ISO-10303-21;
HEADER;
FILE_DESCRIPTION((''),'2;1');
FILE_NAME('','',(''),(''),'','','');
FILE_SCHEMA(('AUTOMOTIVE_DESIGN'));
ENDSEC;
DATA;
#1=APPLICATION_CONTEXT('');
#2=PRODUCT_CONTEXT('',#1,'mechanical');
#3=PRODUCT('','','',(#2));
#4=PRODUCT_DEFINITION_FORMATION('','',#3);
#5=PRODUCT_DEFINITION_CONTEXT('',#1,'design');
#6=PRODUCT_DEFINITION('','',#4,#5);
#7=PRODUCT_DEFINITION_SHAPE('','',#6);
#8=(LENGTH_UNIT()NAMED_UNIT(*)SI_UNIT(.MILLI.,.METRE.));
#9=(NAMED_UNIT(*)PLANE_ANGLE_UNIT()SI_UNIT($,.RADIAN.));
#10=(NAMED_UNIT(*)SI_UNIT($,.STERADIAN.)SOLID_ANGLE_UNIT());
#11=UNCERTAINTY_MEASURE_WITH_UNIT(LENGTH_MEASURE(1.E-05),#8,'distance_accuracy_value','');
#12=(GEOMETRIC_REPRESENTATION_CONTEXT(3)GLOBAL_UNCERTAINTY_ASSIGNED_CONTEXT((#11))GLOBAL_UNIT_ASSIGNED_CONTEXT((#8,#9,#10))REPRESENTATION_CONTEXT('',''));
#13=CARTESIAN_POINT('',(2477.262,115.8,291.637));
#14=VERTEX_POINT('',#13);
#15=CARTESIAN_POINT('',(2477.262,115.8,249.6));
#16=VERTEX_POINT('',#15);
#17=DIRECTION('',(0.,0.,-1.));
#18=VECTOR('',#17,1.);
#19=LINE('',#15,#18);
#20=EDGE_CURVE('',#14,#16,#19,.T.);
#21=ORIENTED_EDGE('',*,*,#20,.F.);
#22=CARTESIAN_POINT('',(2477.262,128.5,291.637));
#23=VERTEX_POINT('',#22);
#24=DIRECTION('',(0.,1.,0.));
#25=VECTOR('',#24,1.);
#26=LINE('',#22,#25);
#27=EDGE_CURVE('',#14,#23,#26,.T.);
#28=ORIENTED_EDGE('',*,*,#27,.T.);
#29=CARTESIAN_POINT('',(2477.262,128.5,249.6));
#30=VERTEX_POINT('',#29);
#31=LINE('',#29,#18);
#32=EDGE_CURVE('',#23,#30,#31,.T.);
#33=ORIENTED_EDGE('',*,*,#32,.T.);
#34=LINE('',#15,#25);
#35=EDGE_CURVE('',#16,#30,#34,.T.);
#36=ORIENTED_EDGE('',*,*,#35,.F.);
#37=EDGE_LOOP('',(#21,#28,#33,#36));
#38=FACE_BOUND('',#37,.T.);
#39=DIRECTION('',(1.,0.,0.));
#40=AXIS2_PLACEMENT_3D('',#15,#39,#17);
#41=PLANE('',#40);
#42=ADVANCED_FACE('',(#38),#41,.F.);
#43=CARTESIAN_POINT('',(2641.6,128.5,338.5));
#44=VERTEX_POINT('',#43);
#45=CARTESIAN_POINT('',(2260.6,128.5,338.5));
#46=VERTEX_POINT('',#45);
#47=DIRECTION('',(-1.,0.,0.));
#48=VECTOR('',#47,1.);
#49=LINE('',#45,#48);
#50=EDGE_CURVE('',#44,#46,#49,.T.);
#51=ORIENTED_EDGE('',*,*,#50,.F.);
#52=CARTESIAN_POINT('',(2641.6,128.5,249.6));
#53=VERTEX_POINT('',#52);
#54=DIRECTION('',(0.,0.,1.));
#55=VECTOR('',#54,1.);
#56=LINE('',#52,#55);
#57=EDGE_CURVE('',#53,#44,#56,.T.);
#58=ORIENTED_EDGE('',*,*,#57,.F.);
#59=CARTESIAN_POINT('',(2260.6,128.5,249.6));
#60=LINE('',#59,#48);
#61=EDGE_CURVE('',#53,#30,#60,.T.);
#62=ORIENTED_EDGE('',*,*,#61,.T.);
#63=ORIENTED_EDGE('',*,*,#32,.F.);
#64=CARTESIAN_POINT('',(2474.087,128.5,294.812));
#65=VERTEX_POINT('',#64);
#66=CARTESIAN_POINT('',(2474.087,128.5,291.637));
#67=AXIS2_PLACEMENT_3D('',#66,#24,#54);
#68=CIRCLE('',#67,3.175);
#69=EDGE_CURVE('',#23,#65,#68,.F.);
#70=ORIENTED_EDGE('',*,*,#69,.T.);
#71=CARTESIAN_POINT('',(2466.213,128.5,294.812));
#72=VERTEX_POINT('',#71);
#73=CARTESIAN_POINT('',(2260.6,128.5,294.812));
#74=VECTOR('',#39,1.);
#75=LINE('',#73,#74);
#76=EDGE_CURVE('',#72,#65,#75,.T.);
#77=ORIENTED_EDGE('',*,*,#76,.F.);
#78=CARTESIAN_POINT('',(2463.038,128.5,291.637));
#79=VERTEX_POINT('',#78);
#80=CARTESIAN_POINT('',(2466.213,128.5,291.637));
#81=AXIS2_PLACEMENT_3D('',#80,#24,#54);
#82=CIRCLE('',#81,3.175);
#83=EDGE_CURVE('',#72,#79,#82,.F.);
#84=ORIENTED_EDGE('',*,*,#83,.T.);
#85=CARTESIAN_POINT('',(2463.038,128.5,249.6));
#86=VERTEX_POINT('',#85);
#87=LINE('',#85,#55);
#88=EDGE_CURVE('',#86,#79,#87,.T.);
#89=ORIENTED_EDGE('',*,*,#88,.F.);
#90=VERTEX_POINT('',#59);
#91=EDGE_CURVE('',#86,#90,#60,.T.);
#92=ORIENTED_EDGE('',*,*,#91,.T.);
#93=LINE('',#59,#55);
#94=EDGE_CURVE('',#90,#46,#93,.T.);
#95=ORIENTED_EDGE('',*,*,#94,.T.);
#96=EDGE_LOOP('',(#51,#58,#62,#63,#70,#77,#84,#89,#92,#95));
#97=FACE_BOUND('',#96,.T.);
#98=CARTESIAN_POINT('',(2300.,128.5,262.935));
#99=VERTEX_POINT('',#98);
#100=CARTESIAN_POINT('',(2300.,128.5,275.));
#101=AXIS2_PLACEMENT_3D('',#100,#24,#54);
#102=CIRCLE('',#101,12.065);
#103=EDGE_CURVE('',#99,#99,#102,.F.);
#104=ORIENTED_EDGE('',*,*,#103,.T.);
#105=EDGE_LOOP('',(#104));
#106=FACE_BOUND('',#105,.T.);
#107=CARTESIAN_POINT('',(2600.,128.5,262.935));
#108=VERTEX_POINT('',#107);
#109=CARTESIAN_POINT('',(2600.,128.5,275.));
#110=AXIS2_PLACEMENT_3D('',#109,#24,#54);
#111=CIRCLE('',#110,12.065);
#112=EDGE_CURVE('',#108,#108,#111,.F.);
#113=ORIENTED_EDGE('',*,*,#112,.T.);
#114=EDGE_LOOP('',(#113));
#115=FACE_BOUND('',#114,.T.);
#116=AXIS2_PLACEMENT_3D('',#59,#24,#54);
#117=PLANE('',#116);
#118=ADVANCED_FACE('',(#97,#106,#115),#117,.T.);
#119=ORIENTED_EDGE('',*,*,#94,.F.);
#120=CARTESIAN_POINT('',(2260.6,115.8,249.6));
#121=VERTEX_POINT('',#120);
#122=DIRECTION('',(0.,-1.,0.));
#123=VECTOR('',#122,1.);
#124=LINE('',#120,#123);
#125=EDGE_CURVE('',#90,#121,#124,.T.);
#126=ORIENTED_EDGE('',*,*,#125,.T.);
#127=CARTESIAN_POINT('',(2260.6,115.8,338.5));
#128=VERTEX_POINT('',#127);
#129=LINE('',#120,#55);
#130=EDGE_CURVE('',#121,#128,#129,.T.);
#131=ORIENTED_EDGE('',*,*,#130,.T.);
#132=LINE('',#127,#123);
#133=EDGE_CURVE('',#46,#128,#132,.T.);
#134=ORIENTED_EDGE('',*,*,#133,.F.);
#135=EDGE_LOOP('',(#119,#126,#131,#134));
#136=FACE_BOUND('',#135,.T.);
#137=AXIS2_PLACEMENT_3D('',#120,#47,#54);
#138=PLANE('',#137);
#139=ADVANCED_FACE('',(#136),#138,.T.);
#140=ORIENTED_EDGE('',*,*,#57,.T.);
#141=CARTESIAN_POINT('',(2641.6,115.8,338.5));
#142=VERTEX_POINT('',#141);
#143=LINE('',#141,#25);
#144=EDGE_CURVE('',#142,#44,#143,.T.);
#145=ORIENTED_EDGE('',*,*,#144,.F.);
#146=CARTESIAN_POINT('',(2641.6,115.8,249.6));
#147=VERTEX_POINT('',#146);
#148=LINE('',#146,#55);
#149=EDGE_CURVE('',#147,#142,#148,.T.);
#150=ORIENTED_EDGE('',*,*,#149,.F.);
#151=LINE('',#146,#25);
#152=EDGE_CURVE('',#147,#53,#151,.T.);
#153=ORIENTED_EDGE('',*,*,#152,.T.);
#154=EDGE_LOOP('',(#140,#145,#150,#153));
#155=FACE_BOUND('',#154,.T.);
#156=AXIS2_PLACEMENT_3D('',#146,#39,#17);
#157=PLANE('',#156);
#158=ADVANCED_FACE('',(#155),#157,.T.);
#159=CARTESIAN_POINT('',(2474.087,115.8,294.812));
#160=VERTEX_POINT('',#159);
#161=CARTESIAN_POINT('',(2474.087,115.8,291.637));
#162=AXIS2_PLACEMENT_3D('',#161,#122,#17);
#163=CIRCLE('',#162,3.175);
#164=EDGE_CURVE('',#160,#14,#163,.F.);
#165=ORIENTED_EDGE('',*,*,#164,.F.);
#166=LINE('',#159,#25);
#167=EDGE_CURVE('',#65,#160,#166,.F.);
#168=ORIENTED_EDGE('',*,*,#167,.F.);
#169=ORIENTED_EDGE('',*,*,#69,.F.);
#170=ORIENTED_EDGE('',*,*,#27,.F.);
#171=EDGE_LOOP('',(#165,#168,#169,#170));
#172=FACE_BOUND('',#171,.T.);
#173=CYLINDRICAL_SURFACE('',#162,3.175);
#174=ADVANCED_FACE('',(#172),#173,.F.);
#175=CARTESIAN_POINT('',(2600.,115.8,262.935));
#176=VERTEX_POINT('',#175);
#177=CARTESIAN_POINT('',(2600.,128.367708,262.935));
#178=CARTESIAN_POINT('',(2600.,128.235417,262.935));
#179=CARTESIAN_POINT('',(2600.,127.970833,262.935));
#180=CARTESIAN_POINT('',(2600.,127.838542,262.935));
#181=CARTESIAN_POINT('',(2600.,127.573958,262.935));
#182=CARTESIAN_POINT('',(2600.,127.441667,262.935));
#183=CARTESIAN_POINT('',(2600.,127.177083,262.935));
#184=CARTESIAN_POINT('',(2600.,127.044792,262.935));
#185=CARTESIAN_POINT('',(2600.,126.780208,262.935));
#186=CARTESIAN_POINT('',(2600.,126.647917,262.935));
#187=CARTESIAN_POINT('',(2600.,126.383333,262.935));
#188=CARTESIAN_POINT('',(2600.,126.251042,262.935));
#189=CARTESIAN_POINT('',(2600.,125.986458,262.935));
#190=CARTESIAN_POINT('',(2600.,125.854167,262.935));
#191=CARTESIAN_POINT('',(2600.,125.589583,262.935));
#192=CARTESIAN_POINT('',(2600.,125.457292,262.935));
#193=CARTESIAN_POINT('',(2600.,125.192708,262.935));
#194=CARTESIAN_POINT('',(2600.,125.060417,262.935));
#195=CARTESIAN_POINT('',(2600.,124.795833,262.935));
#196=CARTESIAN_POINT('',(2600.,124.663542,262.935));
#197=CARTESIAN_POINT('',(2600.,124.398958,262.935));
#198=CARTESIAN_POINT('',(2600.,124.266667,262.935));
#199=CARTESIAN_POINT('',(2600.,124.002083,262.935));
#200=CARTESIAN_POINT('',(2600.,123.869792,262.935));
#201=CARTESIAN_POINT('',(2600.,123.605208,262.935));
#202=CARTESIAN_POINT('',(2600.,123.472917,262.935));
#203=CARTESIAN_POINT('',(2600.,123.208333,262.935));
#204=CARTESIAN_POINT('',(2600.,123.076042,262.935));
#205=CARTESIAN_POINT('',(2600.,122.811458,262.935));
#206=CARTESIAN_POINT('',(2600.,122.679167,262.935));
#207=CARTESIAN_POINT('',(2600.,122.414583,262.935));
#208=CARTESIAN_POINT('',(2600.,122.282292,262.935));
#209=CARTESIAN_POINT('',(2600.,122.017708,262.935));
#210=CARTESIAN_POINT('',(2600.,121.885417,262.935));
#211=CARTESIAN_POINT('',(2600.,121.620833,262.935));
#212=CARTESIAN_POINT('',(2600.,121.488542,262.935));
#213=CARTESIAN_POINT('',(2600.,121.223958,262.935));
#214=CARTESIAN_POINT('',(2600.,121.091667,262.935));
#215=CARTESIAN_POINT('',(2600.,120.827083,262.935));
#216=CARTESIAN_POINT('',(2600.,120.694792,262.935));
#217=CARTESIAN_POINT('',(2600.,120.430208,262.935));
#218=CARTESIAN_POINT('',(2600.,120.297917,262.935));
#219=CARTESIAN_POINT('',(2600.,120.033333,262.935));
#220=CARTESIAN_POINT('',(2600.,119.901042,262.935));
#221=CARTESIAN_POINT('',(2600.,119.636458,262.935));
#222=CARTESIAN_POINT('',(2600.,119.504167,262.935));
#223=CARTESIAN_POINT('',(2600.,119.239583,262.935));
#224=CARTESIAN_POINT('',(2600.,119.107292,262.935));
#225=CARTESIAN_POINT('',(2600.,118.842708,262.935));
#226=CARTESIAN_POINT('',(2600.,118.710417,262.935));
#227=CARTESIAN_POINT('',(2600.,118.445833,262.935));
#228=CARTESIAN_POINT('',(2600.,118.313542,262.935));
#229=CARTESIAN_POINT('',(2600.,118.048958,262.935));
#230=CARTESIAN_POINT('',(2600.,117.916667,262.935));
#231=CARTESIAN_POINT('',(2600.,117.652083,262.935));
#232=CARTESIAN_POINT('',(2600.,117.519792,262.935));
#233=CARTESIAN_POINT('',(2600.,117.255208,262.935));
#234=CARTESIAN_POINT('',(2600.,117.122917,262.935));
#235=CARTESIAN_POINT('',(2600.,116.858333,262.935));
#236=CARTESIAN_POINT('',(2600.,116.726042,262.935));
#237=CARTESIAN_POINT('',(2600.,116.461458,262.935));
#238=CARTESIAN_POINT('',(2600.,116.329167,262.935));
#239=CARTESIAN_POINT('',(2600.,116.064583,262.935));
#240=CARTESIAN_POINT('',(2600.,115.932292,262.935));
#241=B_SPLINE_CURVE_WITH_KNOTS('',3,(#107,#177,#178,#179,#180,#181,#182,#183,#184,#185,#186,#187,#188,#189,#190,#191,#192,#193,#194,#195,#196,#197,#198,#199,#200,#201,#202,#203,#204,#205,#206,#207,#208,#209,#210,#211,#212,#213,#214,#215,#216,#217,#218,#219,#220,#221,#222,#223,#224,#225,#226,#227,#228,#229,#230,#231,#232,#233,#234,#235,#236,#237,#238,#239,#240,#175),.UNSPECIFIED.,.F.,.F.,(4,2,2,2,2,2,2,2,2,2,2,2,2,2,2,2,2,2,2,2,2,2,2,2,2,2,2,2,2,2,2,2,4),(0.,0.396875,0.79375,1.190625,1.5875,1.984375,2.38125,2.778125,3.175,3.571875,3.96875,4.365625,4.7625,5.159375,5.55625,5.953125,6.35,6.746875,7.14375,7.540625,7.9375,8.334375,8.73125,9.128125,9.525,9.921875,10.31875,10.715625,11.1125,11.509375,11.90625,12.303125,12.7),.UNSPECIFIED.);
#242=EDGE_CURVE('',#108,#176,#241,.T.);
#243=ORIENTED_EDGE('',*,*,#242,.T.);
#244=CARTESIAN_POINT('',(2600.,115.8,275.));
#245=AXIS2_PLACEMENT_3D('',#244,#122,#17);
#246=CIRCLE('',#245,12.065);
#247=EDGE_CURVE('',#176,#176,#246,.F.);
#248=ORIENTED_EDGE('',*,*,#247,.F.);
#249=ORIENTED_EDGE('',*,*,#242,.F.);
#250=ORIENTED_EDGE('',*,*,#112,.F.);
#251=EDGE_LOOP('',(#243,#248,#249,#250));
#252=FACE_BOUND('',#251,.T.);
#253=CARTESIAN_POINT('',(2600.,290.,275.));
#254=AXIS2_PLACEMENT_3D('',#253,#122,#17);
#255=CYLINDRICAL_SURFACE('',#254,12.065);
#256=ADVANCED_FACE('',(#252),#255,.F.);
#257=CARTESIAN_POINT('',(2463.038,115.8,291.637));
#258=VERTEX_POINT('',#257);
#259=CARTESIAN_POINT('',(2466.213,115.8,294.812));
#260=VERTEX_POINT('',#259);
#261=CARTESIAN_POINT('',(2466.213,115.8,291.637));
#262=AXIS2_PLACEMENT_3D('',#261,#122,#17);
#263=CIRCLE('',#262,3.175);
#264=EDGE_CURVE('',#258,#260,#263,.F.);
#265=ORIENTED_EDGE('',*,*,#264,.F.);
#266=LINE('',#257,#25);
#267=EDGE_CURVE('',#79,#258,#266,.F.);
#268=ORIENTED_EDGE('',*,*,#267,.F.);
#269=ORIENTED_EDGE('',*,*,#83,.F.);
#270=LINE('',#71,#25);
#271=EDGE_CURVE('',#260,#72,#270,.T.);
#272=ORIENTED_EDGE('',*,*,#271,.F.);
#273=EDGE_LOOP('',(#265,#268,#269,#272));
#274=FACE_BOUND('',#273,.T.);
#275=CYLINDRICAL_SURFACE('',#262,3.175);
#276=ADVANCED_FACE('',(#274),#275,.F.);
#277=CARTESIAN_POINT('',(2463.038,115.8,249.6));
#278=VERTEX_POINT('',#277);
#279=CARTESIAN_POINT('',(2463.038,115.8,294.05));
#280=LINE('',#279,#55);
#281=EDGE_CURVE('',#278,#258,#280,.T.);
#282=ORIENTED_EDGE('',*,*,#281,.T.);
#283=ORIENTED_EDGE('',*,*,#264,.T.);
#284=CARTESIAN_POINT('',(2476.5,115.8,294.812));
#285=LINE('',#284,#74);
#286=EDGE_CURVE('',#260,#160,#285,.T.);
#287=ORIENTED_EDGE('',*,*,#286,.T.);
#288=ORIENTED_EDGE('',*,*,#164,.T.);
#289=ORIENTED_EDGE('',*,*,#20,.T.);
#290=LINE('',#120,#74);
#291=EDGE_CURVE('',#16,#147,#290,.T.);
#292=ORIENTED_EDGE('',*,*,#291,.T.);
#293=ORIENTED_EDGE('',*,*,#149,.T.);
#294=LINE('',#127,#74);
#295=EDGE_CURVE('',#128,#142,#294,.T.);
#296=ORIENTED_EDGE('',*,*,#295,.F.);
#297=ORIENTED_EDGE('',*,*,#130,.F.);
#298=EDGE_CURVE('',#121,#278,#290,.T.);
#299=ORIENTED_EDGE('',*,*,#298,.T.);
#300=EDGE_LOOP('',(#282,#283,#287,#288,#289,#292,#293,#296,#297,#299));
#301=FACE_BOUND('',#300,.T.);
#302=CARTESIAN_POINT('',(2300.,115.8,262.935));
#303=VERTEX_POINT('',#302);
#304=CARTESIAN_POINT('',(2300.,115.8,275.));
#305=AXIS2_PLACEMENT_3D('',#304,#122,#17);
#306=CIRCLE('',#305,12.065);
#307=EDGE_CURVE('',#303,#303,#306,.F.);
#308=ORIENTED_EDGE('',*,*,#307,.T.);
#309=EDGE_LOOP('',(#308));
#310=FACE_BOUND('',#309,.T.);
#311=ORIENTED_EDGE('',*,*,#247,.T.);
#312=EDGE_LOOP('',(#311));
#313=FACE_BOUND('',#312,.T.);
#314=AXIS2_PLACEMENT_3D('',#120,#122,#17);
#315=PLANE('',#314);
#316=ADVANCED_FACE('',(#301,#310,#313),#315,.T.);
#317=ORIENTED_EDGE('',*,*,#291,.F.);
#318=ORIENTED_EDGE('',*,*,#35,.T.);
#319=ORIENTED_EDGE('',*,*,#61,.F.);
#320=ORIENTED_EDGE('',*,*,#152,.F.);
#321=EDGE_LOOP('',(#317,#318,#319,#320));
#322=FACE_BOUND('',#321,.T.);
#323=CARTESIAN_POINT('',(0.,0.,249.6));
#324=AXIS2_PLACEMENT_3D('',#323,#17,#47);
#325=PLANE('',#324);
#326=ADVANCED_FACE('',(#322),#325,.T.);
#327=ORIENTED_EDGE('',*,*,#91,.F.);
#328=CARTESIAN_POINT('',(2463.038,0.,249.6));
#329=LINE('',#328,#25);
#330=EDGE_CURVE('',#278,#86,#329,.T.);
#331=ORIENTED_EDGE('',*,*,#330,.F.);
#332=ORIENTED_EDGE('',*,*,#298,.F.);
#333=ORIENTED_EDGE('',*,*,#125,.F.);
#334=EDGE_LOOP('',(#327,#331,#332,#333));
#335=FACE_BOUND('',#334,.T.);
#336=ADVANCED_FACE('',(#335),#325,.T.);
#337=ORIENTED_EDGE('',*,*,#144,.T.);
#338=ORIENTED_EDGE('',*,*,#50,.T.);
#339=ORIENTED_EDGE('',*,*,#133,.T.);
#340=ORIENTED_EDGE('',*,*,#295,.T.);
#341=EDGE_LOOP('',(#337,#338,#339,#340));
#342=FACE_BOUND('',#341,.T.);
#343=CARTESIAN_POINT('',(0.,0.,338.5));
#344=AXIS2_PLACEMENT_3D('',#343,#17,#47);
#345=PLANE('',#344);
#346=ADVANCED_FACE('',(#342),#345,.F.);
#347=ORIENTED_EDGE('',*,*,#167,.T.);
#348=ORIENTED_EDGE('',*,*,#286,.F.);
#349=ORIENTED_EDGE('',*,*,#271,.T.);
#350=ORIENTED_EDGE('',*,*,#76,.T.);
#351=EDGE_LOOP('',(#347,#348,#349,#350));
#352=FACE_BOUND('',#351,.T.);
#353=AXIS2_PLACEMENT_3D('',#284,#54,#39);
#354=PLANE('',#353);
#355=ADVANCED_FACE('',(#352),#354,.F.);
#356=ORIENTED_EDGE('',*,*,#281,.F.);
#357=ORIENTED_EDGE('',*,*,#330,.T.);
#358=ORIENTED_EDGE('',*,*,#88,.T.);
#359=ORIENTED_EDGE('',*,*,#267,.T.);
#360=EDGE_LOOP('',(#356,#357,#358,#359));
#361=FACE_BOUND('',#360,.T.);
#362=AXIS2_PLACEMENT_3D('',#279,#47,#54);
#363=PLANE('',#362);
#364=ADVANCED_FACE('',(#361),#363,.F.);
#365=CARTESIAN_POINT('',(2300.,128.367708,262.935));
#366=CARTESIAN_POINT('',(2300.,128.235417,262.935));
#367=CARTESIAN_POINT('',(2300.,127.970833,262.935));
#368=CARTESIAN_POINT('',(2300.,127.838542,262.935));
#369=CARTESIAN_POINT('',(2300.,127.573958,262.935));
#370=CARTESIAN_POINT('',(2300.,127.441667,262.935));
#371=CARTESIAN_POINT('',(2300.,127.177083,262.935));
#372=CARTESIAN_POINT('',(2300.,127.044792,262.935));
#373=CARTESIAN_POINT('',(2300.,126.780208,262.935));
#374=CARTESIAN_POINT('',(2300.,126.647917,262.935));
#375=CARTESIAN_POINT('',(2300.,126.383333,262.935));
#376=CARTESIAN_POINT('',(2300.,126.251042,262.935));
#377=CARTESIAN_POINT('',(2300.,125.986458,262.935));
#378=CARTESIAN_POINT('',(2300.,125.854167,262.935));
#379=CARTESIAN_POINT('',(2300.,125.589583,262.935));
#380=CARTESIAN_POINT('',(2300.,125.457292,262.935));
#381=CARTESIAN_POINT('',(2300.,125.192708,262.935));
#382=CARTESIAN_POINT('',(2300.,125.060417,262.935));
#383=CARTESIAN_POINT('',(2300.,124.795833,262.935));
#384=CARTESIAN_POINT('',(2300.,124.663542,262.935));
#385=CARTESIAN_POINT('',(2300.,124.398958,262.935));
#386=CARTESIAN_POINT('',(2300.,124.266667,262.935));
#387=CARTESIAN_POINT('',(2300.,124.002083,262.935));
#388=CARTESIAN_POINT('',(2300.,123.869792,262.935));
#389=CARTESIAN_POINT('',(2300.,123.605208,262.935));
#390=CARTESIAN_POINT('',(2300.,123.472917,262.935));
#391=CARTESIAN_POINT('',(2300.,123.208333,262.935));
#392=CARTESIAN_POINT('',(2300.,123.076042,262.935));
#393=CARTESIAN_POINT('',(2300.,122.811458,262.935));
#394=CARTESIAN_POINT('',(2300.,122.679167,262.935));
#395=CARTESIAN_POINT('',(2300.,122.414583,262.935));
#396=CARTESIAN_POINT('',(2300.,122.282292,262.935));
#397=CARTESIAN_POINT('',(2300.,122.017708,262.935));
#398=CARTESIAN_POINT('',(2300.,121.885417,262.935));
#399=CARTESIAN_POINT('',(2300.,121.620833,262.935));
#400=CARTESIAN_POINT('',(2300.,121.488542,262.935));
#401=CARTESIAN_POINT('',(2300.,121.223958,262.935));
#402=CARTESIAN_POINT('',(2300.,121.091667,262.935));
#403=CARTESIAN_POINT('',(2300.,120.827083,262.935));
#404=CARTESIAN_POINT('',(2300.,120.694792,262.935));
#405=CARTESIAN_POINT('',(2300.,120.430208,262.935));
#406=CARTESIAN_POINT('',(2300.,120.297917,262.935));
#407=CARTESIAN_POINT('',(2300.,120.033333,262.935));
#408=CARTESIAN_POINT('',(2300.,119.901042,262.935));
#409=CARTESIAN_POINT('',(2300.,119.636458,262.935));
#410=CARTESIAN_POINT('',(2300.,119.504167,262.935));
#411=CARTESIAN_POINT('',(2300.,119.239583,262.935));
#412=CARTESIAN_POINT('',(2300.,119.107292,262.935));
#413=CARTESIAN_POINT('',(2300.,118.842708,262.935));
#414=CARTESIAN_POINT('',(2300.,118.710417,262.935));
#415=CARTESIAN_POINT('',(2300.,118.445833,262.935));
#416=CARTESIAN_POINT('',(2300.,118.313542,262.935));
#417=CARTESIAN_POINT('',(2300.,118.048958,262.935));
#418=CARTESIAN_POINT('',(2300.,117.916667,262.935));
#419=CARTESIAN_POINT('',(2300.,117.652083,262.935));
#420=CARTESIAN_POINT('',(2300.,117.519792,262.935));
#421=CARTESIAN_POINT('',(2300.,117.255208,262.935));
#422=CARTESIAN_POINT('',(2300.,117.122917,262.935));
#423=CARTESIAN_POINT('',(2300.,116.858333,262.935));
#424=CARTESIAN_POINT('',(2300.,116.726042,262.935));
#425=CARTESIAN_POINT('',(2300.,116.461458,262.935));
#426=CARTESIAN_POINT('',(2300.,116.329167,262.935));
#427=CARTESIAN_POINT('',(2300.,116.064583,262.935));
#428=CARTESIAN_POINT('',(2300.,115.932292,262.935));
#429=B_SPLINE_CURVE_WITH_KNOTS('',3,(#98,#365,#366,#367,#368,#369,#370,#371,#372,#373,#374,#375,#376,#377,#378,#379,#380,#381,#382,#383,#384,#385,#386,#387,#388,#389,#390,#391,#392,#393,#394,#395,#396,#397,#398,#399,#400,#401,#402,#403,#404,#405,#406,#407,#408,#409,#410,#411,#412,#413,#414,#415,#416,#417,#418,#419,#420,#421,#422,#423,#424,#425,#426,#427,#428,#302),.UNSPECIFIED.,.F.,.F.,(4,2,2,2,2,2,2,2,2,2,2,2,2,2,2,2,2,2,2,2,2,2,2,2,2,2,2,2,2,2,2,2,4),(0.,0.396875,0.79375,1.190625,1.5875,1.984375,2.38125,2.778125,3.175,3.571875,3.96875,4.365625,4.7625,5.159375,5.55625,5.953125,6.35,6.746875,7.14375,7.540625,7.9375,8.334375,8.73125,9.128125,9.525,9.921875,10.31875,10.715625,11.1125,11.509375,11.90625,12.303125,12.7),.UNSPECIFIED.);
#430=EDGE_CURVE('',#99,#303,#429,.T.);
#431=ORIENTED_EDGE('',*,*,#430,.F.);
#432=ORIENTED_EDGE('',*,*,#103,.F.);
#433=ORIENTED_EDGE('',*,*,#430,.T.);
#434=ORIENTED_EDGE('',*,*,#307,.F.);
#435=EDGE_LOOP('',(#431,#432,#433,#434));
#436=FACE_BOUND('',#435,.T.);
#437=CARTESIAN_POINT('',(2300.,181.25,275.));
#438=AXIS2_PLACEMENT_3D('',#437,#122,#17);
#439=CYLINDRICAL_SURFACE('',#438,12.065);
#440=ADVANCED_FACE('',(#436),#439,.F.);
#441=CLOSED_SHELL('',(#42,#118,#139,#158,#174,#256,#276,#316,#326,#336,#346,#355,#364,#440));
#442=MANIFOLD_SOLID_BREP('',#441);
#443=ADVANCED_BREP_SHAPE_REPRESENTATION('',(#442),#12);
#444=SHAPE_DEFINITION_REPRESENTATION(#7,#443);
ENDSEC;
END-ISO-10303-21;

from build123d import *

# Parameters (mm, degrees)
BOSS_EXTRUDE1_DEPTH      = 50.8
BOSS_EXTRUDE1_DEPTH_BACK = 38.1
SKETCH2_W                = 381
SKETCH2_H                = 12.7
SKETCH3_W                = 12.7
SKETCH3_H                = 44.45
CUT_EXTRUDE1_DEPTH       = 2664.230012597
CAVITY1_START            = 115.8
CAVITY1_OUTLINE_R        = 12.7
CAVITY1_DEPTH            = 12.7
MOVE_FACE_HOLES_BY       = 0.635
MOVE_FACE_HOLES_2_BY     = 0.635
MOVE_FACE2_BY            = 0.762
MOVE_FACE2_2_BY          = 0.762
MOVE_FACE2_3_BY          = 0.762
SLOT_FILLET_R            = 3.175


# Read off the part's stored shape, not the designer's step: Cavity1
with BuildPart() as part:
    # Sketch2 → Boss-Extrude1 (new, two sides: drawn at the far end of the back side and taken through both)
    with BuildSketch(Plane.XY.offset(287.7).offset(-BOSS_EXTRUDE1_DEPTH_BACK)):
        with Locations((2451.1, 122.15)):
            Rectangle(SKETCH2_W, SKETCH2_H)
    extrude(amount=BOSS_EXTRUDE1_DEPTH + BOSS_EXTRUDE1_DEPTH_BACK)

    # Sketch3 → Cut-Extrude1 (cut, through all)
    with BuildSketch(Plane(origin=(0, 128.5, 0), x_dir=(1, 0, 0), z_dir=(0, 1, 0))):
        with Locations((2470.15, -271.825)):
            Rectangle(SKETCH3_W, SKETCH3_H)
    extrude(amount=-CUT_EXTRUDE1_DEPTH, mode=Mode.SUBTRACT)

    # Cavity1 outline → Cavity1 (cut)
    with BuildSketch(Plane(origin=(0, 0, 0), x_dir=(1, 0, 0), z_dir=(0, 1, 0)).offset(CAVITY1_START)):
        with Locations((2300, -275)):
            Circle(CAVITY1_OUTLINE_R)
        with Locations((2600, -275)):
            Circle(CAVITY1_OUTLINE_R)
    extrude(amount=CAVITY1_DEPTH, mode=Mode.SUBTRACT)

    # Move Face Holes: a curved face moved outward by 0.635
    add(Solid.thicken(part.faces().sort_by_distance((2587.3, 122.15, 275))[0], MOVE_FACE_HOLES_BY))

    # Move Face Holes 2: a curved face moved outward by 0.635
    add(Solid.thicken(part.faces().sort_by_distance((2287.3, 122.15, 275))[0], MOVE_FACE_HOLES_2_BY))

    # Move Face2: a face moved inward by 0.762
    extrude(part.faces().sort_by_distance((2470.15, 122.15, 294.05))[0], amount=MOVE_FACE2_BY, dir=(0, 0, 1), mode=Mode.SUBTRACT)

    # Move Face2 2: a face moved inward by 0.762
    extrude(part.faces().sort_by_distance((2476.5, 122.15, 271.825))[0], amount=MOVE_FACE2_2_BY, dir=(1, 0, 0), mode=Mode.SUBTRACT)

    # Move Face2 3: a face moved inward by 0.762
    extrude(part.faces().sort_by_distance((2463.8, 122.15, 271.825))[0], amount=MOVE_FACE2_3_BY, dir=(-1, 0, 0), mode=Mode.SUBTRACT)

    # Slot Fillet
    slot_fillet_edges = [part.edges().sort_by_distance(p)[0] for p in [
        (2477.262, 122.15, 294.812),
        (2463.038, 122.15, 294.812),
    ]]
    fillet(slot_fillet_edges, radius=SLOT_FILLET_R)


solid = part.part
